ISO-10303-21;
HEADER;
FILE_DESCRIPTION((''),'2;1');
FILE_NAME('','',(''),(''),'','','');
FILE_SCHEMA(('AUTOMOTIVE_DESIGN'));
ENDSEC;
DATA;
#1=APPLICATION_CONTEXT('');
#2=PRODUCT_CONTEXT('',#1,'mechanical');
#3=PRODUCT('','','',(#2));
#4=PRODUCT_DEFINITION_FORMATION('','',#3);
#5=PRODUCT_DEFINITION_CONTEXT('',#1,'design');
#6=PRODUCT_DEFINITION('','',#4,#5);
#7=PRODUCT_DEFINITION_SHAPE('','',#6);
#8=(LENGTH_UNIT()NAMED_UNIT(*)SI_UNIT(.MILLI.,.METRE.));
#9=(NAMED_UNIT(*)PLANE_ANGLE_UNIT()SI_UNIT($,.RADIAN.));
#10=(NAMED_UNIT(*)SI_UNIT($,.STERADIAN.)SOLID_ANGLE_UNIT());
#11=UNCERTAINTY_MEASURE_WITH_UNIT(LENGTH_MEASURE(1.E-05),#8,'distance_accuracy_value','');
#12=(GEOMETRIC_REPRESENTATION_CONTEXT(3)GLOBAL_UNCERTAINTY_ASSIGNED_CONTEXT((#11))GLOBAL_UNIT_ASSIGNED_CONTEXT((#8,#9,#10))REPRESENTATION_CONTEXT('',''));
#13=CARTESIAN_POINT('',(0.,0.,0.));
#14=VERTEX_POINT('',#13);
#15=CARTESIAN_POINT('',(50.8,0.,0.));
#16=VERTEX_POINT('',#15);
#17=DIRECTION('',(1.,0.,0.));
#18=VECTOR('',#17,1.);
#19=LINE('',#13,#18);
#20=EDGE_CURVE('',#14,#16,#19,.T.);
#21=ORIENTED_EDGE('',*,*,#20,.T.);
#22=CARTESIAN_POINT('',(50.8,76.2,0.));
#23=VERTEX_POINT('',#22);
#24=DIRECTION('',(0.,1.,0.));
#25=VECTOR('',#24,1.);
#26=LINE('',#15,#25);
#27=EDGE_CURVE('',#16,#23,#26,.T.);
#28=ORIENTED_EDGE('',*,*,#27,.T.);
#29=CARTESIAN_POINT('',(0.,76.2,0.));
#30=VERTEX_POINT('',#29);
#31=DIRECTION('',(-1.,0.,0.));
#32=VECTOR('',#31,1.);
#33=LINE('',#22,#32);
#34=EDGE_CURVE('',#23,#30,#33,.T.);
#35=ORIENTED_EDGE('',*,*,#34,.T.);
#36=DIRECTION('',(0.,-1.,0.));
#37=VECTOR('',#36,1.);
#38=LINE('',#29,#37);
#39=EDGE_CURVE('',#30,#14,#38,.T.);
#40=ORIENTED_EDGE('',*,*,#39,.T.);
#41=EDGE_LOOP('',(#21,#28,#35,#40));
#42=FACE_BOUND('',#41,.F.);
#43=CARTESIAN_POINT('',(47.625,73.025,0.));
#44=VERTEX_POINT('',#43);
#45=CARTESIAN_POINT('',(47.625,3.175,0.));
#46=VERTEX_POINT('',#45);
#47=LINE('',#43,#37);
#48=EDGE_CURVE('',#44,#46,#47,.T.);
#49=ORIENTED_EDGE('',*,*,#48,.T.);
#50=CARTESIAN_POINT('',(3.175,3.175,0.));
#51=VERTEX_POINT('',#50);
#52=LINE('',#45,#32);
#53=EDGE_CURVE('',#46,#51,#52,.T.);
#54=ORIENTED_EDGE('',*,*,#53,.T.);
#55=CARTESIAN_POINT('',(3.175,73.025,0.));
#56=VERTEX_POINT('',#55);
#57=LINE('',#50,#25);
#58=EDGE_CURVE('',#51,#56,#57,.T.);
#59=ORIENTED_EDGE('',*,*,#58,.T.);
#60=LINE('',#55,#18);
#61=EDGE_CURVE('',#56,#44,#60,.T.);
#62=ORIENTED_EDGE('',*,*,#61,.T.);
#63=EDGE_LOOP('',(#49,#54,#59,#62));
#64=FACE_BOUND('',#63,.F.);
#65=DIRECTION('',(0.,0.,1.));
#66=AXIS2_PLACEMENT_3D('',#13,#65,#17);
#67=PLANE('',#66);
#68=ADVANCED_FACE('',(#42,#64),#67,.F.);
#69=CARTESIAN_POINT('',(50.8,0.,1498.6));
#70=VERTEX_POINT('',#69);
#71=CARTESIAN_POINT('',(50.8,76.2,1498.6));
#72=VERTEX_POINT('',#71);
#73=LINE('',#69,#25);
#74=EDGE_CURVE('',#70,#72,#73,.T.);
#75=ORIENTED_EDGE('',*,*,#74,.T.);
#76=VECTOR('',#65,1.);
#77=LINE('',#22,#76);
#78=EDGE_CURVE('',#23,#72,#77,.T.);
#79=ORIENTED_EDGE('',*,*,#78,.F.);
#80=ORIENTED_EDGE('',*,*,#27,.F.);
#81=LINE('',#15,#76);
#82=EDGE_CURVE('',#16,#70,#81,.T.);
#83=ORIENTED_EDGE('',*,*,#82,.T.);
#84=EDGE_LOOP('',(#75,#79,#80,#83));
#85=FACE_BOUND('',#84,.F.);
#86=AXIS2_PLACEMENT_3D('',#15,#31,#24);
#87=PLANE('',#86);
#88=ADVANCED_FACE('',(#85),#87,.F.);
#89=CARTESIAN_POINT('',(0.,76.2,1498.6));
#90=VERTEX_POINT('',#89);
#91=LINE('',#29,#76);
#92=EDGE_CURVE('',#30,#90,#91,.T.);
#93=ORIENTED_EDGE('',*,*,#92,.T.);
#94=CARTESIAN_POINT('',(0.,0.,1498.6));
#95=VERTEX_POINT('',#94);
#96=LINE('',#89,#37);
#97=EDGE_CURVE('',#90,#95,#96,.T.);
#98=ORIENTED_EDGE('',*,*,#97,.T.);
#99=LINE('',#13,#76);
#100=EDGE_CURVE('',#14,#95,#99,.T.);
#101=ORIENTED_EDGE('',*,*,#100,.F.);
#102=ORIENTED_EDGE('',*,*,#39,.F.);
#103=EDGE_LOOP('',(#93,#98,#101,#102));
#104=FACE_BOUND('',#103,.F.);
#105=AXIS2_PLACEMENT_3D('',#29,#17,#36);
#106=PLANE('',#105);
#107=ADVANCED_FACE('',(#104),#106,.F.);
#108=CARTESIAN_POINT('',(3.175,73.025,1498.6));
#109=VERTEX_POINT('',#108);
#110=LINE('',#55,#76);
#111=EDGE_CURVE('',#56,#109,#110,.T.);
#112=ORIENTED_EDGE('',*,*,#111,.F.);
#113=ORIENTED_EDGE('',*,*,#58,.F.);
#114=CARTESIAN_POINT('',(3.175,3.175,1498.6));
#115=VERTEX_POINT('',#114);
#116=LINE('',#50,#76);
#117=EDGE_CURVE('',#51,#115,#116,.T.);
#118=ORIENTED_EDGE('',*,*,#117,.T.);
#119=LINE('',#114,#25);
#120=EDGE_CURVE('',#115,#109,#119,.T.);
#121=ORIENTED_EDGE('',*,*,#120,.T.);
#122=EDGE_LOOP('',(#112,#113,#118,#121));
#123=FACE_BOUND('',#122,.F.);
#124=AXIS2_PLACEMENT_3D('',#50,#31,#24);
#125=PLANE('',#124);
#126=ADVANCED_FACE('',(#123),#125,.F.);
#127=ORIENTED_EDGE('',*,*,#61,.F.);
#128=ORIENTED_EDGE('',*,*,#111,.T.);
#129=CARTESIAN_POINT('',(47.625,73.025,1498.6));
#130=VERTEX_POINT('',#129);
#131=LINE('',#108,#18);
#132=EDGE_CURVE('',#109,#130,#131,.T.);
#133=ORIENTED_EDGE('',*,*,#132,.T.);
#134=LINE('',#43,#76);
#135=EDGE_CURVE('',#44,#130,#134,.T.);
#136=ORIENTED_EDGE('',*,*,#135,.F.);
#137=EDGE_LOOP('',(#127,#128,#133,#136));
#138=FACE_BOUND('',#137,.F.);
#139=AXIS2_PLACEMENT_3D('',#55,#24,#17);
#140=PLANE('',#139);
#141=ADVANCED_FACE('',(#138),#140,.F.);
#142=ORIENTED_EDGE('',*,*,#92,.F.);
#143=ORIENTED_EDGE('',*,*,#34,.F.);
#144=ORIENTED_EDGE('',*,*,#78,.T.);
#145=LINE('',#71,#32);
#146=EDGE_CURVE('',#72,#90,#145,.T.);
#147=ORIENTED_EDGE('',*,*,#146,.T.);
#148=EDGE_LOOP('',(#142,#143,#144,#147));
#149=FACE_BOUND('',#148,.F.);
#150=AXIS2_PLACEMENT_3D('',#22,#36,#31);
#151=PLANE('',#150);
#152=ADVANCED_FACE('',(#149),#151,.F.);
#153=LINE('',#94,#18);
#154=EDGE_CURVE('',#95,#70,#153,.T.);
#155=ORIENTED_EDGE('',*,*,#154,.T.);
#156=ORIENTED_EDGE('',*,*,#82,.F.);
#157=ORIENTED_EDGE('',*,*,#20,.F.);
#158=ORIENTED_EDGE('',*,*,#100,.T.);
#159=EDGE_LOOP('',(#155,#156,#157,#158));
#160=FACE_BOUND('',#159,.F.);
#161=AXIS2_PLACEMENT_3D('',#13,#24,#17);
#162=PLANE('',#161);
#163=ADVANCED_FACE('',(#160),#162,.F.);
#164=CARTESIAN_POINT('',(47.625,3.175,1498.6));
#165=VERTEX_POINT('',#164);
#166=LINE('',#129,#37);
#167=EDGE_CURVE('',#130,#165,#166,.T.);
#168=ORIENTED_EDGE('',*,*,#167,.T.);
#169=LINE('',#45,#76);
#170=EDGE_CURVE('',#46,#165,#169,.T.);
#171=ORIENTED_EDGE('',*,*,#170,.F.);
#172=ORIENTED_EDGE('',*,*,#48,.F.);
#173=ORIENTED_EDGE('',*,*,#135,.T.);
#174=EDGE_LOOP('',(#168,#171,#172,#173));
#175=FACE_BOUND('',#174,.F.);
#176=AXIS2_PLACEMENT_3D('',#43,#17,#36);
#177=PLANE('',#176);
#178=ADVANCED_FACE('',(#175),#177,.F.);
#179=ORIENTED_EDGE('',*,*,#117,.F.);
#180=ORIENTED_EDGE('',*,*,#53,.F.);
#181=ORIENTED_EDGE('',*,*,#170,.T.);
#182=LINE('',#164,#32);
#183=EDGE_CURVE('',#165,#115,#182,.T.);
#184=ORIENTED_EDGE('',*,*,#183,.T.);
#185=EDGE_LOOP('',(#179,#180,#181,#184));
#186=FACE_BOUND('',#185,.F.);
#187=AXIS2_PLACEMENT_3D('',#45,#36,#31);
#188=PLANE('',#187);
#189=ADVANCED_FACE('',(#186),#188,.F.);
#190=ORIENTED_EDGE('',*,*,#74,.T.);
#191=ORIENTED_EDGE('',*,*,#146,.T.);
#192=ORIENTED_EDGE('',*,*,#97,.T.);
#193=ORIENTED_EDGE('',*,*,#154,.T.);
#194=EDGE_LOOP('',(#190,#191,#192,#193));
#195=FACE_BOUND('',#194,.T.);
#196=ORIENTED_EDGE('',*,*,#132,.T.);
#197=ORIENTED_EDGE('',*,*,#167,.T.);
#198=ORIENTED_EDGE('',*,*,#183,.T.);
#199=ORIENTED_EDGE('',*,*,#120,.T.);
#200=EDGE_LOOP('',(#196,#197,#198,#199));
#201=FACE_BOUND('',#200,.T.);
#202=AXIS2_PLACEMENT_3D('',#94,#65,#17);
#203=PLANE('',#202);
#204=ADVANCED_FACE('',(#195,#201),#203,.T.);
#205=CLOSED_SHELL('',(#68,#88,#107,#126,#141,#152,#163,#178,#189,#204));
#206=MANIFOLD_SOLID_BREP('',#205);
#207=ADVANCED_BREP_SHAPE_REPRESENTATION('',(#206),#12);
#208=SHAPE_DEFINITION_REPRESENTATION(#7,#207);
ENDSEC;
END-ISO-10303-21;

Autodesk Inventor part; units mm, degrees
ref_plane "YZ Plane" through (0, 0, 0) normal (1, 0, 0) x (0, 1, 0)
ref_plane "XZ Plane" through (0, 0, 0) normal (0, 1, 0) x (-1, 0, 0)
ref_plane "XY Plane" through (0, 0, 0) normal (0, 0, 1) x (1, 0, 0)
sketch "Sketch1" plane through (0, 0, 0) normal (0, 0, 1) x (1, 0, 0)
  line L0 (0, 0) -> (50.8, 0)
  line L1 (50.8, 0) -> (50.8, 76.2)
  line L2 (50.8, 76.2) -> (0, 76.2)
  line L3 (0, 76.2) -> (0, 0)
  line L4 (3.175, 73.025) -> (47.625, 73.025)
  line L5 (47.625, 73.025) -> (47.625, 3.175)
  line L6 (47.625, 3.175) -> (3.175, 3.175)
  line L7 (3.175, 3.175) -> (3.175, 73.025)
  dimension "d13" = 3.175
  dimension "d14" = 50.8
  dimension "d15" = 76.2
  dimension "d16" = 3.175
  dimension "d17" = 3.175
  dimension "d18" = 3.175
extrude "Extrusion1" add sketch "Sketch1" along normal blind 1498.6
properties part number "GE-12019-05" material "Aluminum-6061"
